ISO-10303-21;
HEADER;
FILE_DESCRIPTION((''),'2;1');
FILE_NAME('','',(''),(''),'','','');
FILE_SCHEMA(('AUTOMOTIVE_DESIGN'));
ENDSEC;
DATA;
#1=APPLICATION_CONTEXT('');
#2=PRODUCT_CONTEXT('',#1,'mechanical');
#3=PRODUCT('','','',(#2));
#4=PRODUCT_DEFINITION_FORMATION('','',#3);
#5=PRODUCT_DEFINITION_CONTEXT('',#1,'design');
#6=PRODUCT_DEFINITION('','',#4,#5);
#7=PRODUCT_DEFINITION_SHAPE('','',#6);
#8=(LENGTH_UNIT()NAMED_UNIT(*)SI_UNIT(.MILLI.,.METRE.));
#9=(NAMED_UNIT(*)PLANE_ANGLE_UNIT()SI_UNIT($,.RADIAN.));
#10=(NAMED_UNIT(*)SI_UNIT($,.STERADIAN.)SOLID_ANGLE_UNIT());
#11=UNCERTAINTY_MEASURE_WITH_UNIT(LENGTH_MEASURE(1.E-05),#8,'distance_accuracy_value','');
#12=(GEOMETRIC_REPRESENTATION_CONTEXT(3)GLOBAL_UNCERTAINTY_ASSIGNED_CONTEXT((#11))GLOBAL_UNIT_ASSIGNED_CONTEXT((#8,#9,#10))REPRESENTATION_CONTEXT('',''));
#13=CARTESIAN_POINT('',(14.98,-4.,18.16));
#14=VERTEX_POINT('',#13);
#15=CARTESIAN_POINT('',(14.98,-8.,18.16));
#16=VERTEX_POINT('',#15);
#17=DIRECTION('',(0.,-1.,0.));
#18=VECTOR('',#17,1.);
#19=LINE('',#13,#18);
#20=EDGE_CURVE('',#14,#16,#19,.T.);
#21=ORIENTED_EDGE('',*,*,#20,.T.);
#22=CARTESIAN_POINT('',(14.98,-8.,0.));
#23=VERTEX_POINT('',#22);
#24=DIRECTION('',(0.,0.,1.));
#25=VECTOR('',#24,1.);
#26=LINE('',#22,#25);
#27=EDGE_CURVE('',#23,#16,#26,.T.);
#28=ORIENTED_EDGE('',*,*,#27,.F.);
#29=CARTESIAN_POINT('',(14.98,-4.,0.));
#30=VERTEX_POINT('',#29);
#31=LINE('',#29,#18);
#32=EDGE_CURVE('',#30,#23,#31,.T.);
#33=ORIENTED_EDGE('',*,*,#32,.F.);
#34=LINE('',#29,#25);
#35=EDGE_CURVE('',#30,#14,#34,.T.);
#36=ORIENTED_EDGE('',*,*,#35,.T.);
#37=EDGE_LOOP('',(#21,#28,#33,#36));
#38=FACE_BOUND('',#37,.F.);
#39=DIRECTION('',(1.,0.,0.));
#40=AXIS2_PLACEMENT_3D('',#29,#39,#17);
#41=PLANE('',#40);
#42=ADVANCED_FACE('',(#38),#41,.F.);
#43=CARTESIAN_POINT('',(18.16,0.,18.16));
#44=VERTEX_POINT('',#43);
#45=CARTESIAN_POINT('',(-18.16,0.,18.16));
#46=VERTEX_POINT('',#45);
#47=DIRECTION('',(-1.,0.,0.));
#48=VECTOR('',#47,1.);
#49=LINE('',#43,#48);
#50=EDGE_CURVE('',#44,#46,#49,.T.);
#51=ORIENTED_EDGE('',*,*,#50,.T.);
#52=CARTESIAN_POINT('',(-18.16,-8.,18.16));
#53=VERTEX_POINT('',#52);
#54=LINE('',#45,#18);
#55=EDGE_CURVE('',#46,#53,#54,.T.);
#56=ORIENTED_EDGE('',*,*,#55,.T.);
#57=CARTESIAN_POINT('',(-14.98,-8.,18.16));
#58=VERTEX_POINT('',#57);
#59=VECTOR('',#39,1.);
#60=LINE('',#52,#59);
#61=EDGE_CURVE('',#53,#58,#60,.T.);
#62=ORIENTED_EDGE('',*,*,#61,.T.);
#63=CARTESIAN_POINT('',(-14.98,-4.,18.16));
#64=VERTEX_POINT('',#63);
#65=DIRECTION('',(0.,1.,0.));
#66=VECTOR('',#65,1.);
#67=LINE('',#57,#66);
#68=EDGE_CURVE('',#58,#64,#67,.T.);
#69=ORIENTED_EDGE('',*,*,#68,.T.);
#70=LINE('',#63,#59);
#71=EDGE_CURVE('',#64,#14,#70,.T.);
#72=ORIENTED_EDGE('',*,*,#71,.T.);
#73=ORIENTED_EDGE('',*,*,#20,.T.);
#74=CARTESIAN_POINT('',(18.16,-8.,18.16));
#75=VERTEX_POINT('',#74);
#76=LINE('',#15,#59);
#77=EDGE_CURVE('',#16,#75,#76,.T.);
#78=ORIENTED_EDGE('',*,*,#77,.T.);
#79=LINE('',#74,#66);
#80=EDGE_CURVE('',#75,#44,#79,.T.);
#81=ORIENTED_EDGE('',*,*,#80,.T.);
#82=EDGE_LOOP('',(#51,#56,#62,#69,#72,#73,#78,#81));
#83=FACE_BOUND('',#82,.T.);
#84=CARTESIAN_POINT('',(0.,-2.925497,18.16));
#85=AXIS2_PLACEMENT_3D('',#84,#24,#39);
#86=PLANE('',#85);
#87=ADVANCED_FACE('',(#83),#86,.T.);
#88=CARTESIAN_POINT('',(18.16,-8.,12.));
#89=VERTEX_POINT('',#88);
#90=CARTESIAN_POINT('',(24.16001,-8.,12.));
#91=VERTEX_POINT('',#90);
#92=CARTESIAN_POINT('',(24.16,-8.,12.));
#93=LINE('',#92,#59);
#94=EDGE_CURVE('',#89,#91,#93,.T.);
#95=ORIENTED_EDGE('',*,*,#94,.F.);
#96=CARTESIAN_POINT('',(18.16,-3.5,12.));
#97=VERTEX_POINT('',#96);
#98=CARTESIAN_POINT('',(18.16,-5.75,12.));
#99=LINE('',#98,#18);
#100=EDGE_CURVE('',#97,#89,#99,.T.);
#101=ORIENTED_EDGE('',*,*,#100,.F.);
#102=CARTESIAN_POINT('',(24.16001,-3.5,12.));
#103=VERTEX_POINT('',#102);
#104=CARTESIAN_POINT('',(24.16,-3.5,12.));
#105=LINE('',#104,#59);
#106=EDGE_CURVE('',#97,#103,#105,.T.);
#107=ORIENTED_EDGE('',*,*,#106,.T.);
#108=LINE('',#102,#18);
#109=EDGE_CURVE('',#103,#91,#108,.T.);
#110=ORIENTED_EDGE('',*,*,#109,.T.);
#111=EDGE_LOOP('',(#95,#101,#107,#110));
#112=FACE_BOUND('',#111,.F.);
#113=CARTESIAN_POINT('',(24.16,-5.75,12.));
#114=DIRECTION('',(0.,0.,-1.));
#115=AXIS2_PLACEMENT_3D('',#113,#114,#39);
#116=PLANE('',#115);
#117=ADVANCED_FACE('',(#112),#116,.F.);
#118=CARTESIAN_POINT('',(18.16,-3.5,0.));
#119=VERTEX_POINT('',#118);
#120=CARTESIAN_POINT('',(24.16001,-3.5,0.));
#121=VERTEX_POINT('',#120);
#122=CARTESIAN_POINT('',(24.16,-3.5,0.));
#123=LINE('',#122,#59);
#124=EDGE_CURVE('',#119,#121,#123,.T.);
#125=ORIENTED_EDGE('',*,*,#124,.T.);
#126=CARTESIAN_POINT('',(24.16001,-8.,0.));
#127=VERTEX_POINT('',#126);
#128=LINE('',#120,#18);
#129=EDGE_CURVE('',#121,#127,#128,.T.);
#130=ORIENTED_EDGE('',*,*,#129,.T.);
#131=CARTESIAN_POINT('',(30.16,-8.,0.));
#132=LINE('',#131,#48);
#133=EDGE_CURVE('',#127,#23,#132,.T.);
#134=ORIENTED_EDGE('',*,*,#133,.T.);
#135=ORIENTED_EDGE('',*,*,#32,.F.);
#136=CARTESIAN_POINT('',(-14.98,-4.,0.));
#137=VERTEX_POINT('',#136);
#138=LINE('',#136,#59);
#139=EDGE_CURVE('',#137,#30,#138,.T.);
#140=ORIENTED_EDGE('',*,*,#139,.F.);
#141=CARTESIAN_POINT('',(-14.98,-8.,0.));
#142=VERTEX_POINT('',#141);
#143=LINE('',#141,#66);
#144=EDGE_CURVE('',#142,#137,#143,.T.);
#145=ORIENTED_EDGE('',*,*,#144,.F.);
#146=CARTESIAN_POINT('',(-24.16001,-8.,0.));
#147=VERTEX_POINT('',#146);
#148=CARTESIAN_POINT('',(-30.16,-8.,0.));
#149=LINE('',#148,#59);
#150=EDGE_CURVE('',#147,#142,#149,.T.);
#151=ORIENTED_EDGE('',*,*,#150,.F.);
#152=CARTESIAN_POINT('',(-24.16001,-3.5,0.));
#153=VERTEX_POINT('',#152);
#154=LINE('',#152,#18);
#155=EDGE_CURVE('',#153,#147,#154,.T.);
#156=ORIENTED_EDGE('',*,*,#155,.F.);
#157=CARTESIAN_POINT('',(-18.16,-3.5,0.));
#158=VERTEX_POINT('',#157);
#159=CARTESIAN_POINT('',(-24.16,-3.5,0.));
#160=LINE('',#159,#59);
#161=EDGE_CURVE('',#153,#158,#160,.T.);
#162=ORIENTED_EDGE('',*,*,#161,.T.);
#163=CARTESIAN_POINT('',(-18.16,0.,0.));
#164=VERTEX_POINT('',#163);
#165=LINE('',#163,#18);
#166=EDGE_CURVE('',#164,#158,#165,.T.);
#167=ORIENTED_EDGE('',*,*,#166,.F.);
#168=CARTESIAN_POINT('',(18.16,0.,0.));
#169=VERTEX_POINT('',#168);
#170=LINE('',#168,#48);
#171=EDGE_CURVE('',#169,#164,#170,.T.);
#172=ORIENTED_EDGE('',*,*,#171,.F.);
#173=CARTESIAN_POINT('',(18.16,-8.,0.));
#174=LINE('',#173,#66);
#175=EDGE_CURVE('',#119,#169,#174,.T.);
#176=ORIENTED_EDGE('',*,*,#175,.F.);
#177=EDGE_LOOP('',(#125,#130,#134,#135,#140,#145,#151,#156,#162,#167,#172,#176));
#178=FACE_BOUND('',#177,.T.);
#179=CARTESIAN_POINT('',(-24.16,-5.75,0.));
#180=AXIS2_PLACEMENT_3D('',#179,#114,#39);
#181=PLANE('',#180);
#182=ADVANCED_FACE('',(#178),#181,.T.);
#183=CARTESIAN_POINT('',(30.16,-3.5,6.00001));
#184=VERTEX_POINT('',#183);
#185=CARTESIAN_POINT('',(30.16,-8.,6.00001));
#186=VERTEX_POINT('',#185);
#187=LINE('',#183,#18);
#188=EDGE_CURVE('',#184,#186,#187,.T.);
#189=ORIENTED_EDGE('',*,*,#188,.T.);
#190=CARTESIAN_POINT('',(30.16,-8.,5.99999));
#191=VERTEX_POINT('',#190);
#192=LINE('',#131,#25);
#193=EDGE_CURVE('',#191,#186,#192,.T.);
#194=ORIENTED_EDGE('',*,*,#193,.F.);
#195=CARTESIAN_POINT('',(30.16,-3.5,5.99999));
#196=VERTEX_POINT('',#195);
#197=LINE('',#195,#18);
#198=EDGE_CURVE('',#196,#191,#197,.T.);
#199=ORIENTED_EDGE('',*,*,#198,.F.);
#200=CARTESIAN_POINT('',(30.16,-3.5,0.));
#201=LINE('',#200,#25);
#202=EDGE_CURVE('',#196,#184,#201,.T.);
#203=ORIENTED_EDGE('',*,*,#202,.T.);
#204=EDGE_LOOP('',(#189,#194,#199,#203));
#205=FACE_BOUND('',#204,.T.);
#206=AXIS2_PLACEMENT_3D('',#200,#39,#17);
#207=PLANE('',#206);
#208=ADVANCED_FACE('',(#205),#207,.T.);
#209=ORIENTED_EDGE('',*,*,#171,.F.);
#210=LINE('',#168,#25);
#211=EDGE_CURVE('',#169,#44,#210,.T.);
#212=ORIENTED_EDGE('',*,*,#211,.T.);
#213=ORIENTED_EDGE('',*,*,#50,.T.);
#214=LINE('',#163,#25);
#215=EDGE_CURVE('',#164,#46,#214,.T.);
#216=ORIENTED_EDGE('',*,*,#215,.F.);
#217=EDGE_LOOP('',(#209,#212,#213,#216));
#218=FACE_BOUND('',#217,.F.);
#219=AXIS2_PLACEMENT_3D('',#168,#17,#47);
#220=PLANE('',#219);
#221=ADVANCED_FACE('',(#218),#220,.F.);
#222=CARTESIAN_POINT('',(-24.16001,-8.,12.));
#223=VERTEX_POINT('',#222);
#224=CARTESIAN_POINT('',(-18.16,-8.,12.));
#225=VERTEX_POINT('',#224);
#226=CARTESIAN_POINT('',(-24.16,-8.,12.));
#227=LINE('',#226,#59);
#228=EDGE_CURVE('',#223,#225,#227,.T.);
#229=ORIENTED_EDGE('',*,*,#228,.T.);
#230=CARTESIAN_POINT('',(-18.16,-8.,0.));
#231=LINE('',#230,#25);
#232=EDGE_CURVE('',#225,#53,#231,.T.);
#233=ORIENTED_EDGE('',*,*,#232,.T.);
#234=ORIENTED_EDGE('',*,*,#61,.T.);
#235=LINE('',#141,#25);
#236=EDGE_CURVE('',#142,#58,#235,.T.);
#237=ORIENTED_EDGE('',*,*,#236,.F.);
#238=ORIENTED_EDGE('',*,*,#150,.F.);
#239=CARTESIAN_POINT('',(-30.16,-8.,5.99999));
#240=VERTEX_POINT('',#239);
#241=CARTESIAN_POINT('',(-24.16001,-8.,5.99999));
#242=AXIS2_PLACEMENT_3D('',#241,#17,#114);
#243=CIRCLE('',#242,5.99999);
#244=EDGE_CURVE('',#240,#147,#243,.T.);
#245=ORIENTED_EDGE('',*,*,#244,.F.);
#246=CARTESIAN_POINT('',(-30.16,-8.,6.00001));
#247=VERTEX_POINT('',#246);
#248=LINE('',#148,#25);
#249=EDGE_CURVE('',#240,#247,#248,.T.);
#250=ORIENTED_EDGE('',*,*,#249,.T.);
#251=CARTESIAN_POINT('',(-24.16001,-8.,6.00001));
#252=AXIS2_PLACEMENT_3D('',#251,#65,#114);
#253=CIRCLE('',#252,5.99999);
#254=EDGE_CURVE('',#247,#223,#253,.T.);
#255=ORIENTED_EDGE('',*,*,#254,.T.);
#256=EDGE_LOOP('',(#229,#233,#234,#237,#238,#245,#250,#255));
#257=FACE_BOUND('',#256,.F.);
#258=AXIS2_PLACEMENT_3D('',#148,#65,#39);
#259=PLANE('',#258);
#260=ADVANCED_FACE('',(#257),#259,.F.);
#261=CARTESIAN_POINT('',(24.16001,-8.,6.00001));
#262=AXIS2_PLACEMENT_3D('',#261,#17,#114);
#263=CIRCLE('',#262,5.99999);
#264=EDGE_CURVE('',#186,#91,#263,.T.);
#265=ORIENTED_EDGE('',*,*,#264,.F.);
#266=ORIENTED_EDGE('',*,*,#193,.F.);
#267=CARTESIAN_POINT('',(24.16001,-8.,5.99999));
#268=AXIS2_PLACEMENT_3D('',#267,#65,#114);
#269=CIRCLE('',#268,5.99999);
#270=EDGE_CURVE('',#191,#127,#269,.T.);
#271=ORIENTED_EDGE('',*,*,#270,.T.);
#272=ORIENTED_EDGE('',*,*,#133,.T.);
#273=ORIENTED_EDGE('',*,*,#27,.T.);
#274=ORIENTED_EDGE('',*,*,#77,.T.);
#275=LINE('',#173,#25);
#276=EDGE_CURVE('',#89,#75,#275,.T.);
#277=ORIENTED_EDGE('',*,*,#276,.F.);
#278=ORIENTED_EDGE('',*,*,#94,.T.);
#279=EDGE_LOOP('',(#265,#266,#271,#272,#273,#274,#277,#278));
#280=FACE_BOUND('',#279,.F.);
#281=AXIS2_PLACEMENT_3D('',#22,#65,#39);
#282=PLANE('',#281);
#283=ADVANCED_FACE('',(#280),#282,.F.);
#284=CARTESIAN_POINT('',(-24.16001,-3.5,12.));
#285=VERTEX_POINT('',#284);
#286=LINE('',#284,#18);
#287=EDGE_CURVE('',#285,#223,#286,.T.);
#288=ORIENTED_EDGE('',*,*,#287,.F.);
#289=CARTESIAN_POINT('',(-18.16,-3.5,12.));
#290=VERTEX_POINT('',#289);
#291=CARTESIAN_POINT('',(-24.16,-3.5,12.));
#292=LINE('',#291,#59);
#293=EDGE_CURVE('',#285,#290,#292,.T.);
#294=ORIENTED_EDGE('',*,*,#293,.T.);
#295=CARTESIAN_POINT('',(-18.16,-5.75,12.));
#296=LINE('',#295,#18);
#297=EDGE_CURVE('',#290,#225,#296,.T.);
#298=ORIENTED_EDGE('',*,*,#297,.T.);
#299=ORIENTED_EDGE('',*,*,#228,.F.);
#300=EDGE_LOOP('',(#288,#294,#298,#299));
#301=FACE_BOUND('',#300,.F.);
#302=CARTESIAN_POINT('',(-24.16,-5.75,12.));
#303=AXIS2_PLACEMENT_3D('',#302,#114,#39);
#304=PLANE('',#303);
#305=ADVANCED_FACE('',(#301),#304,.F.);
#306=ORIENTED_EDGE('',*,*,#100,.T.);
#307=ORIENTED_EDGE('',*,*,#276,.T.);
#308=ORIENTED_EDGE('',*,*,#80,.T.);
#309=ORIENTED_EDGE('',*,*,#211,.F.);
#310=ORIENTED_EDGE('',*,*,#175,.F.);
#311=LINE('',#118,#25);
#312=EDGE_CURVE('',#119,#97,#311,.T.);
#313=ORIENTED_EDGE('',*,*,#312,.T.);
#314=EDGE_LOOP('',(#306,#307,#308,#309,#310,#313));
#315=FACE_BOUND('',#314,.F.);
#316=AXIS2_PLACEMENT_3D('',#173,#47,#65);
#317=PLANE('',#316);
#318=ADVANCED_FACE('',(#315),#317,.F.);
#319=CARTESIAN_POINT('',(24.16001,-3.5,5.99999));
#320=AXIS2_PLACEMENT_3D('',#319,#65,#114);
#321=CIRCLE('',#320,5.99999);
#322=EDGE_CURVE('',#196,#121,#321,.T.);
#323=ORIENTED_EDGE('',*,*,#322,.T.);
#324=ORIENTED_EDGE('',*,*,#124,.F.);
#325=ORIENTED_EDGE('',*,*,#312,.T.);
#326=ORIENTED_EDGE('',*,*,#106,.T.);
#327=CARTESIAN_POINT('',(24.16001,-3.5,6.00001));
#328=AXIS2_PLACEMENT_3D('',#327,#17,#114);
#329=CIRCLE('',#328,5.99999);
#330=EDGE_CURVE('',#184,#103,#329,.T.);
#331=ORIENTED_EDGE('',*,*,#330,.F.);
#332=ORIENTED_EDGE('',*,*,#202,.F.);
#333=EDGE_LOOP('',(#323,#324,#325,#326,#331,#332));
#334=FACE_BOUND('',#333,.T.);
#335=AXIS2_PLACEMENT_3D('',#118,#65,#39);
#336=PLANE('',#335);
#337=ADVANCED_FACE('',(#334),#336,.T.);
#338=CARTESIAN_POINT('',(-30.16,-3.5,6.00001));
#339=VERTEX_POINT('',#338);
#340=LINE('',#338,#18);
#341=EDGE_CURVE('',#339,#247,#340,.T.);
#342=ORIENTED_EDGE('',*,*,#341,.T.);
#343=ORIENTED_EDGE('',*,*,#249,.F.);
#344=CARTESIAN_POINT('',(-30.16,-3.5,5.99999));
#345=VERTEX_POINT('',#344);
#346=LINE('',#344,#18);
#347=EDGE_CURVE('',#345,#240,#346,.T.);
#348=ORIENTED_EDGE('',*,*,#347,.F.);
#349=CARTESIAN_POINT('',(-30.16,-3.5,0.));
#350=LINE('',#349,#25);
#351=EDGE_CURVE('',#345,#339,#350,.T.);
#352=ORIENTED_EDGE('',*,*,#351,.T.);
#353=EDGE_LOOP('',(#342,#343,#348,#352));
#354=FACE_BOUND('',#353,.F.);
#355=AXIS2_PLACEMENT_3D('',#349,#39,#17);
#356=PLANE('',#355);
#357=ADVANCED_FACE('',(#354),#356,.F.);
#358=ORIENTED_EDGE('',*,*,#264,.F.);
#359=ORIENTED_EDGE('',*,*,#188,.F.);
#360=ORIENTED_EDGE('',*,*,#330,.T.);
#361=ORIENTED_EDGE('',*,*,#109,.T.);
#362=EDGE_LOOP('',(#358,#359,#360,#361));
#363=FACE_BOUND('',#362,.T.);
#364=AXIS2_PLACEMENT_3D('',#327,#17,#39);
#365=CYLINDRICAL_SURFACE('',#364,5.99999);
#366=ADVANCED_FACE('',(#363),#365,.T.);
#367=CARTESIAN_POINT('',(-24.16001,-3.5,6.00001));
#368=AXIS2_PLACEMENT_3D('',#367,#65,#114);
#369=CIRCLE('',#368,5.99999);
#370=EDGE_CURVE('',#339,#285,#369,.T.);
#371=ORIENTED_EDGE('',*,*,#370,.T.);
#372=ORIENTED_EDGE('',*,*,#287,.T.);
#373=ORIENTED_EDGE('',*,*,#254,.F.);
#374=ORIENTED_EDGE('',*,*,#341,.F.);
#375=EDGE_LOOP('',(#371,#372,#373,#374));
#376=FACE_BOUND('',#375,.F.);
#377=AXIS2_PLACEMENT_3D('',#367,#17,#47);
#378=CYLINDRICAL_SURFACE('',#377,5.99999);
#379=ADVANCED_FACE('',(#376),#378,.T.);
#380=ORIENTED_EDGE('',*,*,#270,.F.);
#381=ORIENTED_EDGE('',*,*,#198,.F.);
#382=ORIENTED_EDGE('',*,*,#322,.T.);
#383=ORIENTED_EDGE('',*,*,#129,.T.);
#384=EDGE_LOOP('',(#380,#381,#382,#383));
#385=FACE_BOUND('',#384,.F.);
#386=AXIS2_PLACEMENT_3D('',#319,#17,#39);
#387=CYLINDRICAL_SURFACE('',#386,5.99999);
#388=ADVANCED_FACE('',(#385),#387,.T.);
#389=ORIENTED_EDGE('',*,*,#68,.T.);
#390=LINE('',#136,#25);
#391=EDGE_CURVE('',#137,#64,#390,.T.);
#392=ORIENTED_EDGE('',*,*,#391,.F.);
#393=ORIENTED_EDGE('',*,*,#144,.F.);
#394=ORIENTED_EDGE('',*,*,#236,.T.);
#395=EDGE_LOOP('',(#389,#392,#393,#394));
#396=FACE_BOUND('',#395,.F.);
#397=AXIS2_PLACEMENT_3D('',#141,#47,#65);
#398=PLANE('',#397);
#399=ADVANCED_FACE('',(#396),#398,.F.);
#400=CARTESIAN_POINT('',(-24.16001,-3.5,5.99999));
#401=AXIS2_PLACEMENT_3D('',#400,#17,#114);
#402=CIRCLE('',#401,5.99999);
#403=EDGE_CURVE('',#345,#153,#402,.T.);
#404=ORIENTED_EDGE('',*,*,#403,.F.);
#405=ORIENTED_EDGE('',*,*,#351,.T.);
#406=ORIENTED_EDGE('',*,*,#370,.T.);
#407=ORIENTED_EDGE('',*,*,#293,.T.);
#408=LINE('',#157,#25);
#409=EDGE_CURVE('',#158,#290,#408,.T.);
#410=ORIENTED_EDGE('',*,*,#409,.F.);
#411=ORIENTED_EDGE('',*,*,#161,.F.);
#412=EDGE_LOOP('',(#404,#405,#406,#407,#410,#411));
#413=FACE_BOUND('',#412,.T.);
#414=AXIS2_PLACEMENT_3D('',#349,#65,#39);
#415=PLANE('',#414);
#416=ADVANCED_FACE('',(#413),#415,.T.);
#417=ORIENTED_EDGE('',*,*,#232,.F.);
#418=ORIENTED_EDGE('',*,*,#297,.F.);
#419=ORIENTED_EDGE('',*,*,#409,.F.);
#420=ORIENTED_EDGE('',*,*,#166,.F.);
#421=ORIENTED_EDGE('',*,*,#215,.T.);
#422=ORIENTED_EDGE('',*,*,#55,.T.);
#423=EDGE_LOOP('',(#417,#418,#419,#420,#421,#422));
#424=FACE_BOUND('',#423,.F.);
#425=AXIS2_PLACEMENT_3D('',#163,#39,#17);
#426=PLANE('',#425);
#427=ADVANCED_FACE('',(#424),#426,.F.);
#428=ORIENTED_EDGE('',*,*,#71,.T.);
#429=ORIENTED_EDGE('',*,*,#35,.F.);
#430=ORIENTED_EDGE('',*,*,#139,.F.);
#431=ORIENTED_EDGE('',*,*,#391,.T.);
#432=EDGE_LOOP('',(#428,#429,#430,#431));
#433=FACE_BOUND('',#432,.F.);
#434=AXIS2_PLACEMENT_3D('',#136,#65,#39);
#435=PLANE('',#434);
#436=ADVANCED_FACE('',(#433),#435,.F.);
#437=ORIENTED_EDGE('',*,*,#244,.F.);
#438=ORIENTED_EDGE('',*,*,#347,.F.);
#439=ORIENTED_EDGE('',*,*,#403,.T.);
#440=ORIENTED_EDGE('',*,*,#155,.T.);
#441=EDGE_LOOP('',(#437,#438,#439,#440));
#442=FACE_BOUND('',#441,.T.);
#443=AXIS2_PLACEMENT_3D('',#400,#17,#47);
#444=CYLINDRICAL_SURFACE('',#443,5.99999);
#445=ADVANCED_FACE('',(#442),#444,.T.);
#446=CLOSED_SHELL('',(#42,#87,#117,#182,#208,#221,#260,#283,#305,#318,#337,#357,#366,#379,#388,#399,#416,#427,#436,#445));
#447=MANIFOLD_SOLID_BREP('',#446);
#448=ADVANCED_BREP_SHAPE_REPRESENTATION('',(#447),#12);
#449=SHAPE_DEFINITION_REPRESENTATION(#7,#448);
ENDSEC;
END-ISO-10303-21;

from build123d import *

# Parameters (mm, degrees)
F1_DEPTH = 18.16
F2_W     = 12
F2_H     = 4.5
F3_DEPTH = 12
F4_R     = 5.99999


# Not quite as in the source:
# - a fillet or chamfer is up to 0.001 mm smaller than in the source, because OpenCascade refuses the exact size


with BuildPart() as f1:
    # F0 (on Top) → F1 (new body)
    with BuildSketch(Plane.XY):
        Polygon((18.16, 0), (-18.16, 0), (-18.16, -8), (-14.98, -8), (-14.98, -4), (14.98, -4), (14.98, -8), (18.16, -8), align=None)
    extrude(amount=F1_DEPTH)

    # F2 (on face) → F3 (join)
    with BuildSketch(Plane(origin=(0, 0, 0), x_dir=(1, 0, 0), z_dir=(0, 0, -1))):
        with Locations((-24.16, 5.75)):
            Rectangle(F2_W, F2_H)
        with Locations((24.16, 5.75)):
            Rectangle(F2_W, F2_H)
    extrude(amount=-F3_DEPTH)

    # F4 (radius 6 in the source; OpenCascade refuses exactly that, so slightly less here)
    f4_edges = [f1.edges().sort_by_distance(p)[0] for p in [
        (-30.16, -5.75, 12),
        (-30.16, -5.75, 0),
        (30.16, -5.75, 0),
        (30.16, -5.75, 12),
    ]]
    fillet(f4_edges, radius=F4_R)


solid = f1.part
